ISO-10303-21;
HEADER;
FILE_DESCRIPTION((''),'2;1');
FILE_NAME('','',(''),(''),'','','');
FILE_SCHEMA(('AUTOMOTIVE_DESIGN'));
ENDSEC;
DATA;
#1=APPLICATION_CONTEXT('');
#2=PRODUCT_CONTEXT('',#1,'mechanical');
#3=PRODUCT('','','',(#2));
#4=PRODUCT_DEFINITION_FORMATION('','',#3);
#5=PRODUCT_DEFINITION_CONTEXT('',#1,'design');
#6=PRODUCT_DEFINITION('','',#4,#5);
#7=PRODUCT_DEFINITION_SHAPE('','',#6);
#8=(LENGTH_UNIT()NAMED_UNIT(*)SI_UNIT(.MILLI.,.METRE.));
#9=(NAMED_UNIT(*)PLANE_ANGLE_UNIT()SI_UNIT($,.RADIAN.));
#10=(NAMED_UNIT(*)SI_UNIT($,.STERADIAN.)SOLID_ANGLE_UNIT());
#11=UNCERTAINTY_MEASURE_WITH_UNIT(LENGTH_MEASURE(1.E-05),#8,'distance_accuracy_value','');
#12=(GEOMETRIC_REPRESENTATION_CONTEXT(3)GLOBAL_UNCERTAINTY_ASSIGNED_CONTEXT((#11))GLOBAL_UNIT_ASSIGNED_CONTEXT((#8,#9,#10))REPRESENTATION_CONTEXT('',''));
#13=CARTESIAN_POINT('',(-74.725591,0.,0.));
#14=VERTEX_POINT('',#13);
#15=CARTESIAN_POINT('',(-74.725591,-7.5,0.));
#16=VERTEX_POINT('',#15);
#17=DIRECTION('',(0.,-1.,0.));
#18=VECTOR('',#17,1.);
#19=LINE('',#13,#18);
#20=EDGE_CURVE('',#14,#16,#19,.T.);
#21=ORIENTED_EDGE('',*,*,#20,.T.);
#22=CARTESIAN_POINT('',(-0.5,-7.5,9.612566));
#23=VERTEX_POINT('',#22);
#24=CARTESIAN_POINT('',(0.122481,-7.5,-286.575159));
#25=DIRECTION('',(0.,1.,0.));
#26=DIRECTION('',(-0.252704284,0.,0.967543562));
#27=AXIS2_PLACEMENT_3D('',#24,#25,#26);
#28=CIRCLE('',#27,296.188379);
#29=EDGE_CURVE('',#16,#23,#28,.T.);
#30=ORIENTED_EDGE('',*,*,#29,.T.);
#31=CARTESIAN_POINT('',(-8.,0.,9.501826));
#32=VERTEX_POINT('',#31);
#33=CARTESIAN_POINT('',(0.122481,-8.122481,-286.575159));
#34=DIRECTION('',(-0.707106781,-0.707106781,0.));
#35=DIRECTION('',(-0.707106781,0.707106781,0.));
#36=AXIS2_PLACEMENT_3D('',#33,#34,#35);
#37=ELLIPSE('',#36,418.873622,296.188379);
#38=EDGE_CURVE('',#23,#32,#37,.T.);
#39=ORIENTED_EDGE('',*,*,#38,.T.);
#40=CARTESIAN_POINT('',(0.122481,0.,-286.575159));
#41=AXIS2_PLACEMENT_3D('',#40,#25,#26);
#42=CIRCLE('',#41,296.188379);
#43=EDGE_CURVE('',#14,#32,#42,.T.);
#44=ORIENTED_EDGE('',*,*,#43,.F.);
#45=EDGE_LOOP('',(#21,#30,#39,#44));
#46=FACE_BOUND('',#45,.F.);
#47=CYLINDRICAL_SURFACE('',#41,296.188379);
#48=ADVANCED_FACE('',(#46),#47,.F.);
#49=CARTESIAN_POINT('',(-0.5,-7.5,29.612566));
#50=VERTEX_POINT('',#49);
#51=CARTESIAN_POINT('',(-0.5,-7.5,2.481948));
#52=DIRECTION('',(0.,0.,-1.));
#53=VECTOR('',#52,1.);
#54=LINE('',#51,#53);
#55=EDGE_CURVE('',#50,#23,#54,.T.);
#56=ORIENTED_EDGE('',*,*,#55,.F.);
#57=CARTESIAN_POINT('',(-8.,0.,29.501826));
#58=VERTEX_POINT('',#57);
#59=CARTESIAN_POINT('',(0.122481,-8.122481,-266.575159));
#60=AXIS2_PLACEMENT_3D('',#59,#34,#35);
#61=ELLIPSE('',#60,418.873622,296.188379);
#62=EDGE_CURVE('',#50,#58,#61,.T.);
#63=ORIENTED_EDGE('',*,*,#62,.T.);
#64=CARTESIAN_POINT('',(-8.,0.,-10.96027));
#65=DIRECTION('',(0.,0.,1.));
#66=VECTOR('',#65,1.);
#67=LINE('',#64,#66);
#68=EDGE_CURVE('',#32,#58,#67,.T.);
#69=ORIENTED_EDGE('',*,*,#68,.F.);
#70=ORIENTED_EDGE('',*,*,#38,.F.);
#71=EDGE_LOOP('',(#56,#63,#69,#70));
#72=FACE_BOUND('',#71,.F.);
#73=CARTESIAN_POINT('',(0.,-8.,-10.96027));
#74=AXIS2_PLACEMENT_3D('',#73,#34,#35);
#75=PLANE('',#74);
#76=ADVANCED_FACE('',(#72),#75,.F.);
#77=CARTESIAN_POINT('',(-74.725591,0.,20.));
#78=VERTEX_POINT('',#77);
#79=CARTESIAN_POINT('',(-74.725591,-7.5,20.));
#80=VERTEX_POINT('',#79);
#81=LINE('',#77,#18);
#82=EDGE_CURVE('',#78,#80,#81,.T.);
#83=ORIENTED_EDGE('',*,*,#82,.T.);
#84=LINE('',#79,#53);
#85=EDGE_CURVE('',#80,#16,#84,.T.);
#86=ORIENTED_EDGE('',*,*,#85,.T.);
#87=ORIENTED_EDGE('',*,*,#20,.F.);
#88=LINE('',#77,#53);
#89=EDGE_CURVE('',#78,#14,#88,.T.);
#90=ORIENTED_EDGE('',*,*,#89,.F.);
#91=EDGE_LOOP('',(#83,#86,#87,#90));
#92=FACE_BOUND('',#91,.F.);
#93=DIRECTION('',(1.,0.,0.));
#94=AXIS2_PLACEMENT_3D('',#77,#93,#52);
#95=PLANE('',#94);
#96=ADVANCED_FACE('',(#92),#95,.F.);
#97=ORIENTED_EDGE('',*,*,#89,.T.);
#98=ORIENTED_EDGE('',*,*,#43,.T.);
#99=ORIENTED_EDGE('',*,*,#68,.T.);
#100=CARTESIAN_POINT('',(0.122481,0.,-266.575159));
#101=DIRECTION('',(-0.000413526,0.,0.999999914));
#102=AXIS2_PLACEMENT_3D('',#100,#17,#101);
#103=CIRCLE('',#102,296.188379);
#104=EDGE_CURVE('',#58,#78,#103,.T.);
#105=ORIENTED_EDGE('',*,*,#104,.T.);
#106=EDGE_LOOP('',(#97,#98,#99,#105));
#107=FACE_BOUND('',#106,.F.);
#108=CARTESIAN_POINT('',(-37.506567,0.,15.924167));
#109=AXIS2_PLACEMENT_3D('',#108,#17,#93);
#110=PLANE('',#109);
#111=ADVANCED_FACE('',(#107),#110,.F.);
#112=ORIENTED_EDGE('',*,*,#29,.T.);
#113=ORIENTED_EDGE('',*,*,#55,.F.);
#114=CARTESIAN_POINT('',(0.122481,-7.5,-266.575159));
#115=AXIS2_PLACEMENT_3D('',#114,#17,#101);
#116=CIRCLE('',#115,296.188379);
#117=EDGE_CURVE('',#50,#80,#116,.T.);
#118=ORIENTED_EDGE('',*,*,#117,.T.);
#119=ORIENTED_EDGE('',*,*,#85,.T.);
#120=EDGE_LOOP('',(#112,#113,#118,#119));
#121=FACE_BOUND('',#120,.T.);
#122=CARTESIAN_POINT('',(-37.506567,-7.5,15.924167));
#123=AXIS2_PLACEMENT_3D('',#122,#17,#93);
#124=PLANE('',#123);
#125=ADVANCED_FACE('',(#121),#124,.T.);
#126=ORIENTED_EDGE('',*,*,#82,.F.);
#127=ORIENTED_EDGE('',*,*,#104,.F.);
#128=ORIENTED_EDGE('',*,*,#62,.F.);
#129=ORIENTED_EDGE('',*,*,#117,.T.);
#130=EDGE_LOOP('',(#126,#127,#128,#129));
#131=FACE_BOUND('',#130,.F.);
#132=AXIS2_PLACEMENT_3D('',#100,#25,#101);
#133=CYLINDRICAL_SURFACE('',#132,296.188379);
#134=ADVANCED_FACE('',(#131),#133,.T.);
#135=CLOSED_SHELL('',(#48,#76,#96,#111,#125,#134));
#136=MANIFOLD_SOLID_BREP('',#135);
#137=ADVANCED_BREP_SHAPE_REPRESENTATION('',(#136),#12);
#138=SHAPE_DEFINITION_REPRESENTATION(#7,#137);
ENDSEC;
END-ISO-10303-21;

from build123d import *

# Parameters (mm, degrees)
F1_DEPTH    = 7.5
F2_T1_DEPTH = 61.1469278075


# Not quite as in the source:
# - a fillet or chamfer that OpenCascade refuses, or shapes differently, is made with other operations: its cross-section is extruded or revolved along the edge and cut away or added
# - a feature names something its author has since deleted; it is built from what else it names


with BuildPart() as f1:
    # F0 (on Front) → F1 (new body)
    with BuildSketch(Plane.XZ):
        with BuildLine():
            Line((-74.7255906463, 20), (-74.7255906463, 0))
            ThreePointArc((-74.7255906463, 0), (-37.6697049266, 7.1922767475), (0, 9.613194347))
            Line((0, 9.613194347), (0, 29.613194347))
            ThreePointArc((0, 29.613194347), (-37.6697049266, 27.1922767475), (-74.7255906463, 20))
        make_face()
    extrude(amount=F1_DEPTH)

    # F2: chamfer of 8 on 1 edges, made by hand

    # F2_s2 → F2_t1 (cut)
    with BuildSketch(Plane.XY.offset(-10.9602695567)):
        Polygon((0, -8), (-8, 0), (0, 0), align=None)
    extrude(amount=F2_T1_DEPTH, mode=Mode.SUBTRACT)


solid = f1.part
